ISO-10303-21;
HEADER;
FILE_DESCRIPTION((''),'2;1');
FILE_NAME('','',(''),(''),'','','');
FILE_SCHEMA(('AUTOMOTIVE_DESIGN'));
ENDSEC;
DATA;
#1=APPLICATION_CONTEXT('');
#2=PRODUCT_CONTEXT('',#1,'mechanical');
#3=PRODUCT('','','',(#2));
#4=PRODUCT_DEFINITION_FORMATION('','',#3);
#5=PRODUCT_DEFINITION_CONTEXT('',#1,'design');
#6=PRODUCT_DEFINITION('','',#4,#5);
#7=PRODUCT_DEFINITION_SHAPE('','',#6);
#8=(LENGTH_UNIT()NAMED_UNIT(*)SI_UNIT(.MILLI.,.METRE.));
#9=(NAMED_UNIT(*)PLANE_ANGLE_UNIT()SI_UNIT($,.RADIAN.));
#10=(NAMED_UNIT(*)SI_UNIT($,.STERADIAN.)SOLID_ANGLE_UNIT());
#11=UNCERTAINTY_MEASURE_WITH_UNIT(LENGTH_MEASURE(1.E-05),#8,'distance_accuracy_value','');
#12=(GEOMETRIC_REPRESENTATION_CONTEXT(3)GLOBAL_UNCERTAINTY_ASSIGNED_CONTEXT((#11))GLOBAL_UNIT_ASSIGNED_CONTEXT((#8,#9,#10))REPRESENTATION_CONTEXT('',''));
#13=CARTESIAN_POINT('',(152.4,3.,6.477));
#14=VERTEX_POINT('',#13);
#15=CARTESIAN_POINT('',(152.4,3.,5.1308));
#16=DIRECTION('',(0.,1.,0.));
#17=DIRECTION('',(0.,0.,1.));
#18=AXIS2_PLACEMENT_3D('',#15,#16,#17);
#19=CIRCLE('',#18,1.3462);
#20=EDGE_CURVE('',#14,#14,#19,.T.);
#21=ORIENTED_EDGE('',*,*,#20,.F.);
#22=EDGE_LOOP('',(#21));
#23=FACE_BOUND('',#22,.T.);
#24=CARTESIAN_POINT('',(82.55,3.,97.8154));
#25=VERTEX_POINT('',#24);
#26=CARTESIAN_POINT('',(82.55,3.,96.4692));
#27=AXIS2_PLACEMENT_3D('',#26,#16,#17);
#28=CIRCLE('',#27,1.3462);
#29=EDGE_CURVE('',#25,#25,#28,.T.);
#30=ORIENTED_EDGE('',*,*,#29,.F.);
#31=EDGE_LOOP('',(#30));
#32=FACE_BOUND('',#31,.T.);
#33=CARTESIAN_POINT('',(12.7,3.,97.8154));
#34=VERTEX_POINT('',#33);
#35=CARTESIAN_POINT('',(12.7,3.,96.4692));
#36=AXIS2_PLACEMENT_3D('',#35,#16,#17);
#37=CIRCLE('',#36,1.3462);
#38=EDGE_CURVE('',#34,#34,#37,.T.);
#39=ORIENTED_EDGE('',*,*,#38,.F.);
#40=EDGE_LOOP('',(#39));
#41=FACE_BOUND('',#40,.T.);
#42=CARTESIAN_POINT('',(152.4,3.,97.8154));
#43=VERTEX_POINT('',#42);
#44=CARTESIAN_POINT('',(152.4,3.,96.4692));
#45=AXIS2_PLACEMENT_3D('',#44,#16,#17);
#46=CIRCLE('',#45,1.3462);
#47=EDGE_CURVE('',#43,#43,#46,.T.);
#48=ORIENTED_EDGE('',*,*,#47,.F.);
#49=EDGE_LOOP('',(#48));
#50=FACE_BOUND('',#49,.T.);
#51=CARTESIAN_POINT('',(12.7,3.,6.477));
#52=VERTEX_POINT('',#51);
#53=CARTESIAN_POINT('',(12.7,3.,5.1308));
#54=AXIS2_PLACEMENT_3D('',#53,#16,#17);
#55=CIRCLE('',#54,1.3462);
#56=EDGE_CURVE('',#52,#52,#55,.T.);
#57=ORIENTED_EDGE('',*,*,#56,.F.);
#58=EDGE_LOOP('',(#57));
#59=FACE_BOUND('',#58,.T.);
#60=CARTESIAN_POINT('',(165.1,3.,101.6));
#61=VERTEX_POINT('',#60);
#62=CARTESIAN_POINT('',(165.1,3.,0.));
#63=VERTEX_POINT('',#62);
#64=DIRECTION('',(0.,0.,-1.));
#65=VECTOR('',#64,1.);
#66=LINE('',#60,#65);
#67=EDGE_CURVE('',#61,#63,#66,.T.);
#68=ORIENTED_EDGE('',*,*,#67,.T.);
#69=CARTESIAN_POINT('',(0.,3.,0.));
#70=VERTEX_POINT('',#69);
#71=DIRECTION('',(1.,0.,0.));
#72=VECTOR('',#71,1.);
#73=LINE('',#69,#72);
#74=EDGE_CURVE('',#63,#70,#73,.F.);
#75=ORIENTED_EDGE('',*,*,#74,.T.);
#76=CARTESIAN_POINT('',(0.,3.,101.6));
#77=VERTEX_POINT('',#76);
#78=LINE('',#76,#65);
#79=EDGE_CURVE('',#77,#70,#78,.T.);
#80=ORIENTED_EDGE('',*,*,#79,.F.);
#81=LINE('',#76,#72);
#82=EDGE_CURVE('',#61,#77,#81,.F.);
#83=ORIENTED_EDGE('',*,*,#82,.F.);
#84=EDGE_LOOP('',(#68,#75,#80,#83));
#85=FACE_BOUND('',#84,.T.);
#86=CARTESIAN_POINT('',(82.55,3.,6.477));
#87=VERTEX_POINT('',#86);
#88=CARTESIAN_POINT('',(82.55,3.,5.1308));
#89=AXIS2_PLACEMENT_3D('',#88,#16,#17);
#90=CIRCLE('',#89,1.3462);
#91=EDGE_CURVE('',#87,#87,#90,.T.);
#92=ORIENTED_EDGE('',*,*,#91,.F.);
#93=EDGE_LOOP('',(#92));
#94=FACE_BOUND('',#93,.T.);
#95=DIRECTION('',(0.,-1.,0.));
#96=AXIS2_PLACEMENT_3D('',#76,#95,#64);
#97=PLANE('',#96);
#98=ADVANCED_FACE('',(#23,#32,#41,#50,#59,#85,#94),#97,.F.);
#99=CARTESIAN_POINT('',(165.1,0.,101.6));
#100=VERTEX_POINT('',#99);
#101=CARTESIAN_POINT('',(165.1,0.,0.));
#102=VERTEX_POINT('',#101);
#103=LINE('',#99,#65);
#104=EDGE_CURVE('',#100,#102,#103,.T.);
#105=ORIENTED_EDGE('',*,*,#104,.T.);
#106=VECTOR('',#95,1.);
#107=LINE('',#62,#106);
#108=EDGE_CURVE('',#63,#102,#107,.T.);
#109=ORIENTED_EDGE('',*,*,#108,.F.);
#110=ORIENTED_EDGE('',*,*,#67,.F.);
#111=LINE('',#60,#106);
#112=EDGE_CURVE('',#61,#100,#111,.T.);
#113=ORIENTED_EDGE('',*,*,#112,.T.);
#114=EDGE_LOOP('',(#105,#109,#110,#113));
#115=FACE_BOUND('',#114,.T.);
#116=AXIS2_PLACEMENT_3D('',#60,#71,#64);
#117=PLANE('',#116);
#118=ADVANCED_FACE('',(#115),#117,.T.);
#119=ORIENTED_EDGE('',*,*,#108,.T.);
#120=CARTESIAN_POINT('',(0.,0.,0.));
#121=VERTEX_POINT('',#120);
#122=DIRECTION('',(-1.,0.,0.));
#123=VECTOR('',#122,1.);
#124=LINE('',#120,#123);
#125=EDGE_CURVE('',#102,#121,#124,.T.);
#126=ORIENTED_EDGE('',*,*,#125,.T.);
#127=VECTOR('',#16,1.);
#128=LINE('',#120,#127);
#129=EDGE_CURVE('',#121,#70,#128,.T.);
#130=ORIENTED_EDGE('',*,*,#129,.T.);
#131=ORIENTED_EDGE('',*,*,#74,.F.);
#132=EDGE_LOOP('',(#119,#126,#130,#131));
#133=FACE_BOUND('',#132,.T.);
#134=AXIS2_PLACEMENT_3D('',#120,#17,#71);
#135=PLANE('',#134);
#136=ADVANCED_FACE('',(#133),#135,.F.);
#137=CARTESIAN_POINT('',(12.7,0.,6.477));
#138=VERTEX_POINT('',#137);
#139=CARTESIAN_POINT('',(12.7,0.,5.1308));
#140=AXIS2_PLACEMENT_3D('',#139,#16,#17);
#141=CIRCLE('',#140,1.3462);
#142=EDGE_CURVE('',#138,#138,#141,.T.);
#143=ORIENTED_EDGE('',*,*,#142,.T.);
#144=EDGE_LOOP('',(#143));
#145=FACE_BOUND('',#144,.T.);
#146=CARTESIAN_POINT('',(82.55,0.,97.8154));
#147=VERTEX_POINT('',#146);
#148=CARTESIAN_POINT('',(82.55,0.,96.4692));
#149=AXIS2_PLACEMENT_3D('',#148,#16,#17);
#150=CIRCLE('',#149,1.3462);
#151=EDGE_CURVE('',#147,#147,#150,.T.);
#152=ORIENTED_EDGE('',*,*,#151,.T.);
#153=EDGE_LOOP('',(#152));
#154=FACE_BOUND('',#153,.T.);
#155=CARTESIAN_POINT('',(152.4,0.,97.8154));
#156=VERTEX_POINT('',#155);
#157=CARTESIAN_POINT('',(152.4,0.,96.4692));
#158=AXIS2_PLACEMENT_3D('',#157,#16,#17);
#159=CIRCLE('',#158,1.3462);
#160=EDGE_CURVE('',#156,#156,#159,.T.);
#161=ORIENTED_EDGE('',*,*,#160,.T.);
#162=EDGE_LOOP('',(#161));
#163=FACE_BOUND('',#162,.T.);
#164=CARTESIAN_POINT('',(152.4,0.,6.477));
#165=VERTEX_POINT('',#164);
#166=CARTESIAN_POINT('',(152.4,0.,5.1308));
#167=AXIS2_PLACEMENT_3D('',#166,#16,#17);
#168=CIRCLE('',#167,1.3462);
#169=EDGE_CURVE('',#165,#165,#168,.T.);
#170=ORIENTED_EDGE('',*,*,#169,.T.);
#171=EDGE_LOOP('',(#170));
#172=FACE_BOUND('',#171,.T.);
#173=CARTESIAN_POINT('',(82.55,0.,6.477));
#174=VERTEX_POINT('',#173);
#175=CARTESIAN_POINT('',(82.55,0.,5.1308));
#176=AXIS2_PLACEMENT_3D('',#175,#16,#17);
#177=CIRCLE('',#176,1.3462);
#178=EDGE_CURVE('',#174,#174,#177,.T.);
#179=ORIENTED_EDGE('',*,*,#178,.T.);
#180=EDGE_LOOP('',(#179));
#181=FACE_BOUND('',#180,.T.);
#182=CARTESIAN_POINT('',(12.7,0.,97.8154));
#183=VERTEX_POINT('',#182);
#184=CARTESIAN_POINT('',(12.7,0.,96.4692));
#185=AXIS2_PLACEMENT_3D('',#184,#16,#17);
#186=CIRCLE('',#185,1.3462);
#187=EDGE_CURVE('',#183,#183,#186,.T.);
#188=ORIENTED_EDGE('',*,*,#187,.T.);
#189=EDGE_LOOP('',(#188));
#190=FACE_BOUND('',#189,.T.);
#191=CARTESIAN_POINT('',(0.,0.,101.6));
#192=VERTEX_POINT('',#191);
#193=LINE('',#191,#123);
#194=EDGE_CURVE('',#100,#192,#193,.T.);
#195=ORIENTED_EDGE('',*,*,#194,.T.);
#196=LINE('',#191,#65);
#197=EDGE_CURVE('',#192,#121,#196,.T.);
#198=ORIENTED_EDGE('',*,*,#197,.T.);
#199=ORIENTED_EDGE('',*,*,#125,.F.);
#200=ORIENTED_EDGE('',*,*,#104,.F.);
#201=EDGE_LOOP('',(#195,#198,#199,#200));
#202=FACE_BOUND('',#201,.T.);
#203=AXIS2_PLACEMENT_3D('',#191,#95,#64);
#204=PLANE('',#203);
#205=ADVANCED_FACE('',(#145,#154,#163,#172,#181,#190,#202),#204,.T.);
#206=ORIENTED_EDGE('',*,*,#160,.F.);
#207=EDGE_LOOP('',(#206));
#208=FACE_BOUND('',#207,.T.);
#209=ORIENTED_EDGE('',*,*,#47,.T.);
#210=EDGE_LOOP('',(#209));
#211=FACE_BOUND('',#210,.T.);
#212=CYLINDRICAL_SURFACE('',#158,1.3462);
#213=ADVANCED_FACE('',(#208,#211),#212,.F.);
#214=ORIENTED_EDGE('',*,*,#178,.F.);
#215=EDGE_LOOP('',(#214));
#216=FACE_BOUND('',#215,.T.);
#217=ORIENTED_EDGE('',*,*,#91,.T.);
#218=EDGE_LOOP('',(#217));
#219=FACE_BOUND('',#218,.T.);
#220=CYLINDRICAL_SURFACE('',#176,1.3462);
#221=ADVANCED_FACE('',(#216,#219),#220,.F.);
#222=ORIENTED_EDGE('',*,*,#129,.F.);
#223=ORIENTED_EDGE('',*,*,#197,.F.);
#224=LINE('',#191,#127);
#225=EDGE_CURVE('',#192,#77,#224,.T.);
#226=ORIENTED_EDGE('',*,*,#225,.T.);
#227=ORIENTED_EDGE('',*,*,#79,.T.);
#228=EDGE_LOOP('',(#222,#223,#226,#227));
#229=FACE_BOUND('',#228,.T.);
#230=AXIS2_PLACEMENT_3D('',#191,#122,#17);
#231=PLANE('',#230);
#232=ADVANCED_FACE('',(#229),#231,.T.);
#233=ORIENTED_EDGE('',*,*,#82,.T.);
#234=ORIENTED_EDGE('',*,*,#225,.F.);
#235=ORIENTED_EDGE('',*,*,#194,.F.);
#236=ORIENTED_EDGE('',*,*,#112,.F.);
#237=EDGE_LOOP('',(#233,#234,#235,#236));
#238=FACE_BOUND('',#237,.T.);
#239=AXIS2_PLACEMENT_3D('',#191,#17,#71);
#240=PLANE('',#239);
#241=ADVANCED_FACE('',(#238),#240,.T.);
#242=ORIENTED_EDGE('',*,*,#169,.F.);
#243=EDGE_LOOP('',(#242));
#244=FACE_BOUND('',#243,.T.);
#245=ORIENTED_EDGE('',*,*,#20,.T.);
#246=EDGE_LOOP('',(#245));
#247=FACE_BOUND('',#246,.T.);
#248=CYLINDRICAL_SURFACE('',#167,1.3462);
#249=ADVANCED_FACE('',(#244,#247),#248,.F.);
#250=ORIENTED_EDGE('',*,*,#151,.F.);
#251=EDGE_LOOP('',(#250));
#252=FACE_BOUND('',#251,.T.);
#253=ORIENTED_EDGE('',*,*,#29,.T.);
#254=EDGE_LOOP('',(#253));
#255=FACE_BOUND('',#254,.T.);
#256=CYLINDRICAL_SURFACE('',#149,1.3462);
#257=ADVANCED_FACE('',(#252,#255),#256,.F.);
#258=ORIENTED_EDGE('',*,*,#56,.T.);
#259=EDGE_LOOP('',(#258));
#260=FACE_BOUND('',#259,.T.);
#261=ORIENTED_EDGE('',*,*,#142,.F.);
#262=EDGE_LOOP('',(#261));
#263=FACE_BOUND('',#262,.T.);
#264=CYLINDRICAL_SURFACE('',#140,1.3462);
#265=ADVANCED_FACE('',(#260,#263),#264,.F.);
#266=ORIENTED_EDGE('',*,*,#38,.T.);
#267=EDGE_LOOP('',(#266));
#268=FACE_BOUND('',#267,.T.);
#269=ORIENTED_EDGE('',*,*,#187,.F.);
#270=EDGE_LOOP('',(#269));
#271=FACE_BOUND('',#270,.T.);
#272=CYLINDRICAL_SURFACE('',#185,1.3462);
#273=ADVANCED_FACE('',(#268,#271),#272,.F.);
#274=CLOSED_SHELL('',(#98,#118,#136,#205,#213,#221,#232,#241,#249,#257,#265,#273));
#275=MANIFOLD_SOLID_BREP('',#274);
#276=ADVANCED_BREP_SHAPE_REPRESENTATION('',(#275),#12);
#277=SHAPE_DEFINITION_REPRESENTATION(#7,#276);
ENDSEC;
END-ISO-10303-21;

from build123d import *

# Parameters (mm, degrees)
BASE_FLANGE1_OUTLINE_W = 165.1
BASE_FLANGE1_OUTLINE_H = 3
BASE_FLANGE1_DEPTH     = 101.6
SKETCH2_R              = 1.3462
CUT_EXTRUDE1_DEPTH     = 194.880298122


# Read off the part's stored shape, not the designer's step: Base-Flange1
with BuildPart() as part:
    # Base-Flange1 outline → Base-Flange1 (new body)
    with BuildSketch(Plane.XY):
        with Locations((82.55, 1.5)):
            Rectangle(BASE_FLANGE1_OUTLINE_W, BASE_FLANGE1_OUTLINE_H)
    extrude(amount=BASE_FLANGE1_DEPTH)

    # Sketch2 → Cut-Extrude1 (cut, through all)
    with BuildSketch(Plane(origin=(0, 3, 0), x_dir=(1, 0, 0), z_dir=(0, 1, 0))):
        with Locations(Location((152.4, -5.1308, 0), (0, 0, 270))):
            Circle(SKETCH2_R)
        with Locations(Location((152.4, -96.4692, 0), (0, 0, 270))):
            Circle(SKETCH2_R)
        with Locations(Location((82.55, -96.4692, 0), (0, 0, 270))):
            Circle(SKETCH2_R)
        with Locations(Location((12.7, -96.4692, 0), (0, 0, 270))):
            Circle(SKETCH2_R)
        with Locations(Location((12.7, -5.1308, 0), (0, 0, 270))):
            Circle(SKETCH2_R)
        with Locations(Location((82.55, -5.1308, 0), (0, 0, 270))):
            Circle(SKETCH2_R)
    extrude(amount=-CUT_EXTRUDE1_DEPTH, mode=Mode.SUBTRACT)


solid = part.part
